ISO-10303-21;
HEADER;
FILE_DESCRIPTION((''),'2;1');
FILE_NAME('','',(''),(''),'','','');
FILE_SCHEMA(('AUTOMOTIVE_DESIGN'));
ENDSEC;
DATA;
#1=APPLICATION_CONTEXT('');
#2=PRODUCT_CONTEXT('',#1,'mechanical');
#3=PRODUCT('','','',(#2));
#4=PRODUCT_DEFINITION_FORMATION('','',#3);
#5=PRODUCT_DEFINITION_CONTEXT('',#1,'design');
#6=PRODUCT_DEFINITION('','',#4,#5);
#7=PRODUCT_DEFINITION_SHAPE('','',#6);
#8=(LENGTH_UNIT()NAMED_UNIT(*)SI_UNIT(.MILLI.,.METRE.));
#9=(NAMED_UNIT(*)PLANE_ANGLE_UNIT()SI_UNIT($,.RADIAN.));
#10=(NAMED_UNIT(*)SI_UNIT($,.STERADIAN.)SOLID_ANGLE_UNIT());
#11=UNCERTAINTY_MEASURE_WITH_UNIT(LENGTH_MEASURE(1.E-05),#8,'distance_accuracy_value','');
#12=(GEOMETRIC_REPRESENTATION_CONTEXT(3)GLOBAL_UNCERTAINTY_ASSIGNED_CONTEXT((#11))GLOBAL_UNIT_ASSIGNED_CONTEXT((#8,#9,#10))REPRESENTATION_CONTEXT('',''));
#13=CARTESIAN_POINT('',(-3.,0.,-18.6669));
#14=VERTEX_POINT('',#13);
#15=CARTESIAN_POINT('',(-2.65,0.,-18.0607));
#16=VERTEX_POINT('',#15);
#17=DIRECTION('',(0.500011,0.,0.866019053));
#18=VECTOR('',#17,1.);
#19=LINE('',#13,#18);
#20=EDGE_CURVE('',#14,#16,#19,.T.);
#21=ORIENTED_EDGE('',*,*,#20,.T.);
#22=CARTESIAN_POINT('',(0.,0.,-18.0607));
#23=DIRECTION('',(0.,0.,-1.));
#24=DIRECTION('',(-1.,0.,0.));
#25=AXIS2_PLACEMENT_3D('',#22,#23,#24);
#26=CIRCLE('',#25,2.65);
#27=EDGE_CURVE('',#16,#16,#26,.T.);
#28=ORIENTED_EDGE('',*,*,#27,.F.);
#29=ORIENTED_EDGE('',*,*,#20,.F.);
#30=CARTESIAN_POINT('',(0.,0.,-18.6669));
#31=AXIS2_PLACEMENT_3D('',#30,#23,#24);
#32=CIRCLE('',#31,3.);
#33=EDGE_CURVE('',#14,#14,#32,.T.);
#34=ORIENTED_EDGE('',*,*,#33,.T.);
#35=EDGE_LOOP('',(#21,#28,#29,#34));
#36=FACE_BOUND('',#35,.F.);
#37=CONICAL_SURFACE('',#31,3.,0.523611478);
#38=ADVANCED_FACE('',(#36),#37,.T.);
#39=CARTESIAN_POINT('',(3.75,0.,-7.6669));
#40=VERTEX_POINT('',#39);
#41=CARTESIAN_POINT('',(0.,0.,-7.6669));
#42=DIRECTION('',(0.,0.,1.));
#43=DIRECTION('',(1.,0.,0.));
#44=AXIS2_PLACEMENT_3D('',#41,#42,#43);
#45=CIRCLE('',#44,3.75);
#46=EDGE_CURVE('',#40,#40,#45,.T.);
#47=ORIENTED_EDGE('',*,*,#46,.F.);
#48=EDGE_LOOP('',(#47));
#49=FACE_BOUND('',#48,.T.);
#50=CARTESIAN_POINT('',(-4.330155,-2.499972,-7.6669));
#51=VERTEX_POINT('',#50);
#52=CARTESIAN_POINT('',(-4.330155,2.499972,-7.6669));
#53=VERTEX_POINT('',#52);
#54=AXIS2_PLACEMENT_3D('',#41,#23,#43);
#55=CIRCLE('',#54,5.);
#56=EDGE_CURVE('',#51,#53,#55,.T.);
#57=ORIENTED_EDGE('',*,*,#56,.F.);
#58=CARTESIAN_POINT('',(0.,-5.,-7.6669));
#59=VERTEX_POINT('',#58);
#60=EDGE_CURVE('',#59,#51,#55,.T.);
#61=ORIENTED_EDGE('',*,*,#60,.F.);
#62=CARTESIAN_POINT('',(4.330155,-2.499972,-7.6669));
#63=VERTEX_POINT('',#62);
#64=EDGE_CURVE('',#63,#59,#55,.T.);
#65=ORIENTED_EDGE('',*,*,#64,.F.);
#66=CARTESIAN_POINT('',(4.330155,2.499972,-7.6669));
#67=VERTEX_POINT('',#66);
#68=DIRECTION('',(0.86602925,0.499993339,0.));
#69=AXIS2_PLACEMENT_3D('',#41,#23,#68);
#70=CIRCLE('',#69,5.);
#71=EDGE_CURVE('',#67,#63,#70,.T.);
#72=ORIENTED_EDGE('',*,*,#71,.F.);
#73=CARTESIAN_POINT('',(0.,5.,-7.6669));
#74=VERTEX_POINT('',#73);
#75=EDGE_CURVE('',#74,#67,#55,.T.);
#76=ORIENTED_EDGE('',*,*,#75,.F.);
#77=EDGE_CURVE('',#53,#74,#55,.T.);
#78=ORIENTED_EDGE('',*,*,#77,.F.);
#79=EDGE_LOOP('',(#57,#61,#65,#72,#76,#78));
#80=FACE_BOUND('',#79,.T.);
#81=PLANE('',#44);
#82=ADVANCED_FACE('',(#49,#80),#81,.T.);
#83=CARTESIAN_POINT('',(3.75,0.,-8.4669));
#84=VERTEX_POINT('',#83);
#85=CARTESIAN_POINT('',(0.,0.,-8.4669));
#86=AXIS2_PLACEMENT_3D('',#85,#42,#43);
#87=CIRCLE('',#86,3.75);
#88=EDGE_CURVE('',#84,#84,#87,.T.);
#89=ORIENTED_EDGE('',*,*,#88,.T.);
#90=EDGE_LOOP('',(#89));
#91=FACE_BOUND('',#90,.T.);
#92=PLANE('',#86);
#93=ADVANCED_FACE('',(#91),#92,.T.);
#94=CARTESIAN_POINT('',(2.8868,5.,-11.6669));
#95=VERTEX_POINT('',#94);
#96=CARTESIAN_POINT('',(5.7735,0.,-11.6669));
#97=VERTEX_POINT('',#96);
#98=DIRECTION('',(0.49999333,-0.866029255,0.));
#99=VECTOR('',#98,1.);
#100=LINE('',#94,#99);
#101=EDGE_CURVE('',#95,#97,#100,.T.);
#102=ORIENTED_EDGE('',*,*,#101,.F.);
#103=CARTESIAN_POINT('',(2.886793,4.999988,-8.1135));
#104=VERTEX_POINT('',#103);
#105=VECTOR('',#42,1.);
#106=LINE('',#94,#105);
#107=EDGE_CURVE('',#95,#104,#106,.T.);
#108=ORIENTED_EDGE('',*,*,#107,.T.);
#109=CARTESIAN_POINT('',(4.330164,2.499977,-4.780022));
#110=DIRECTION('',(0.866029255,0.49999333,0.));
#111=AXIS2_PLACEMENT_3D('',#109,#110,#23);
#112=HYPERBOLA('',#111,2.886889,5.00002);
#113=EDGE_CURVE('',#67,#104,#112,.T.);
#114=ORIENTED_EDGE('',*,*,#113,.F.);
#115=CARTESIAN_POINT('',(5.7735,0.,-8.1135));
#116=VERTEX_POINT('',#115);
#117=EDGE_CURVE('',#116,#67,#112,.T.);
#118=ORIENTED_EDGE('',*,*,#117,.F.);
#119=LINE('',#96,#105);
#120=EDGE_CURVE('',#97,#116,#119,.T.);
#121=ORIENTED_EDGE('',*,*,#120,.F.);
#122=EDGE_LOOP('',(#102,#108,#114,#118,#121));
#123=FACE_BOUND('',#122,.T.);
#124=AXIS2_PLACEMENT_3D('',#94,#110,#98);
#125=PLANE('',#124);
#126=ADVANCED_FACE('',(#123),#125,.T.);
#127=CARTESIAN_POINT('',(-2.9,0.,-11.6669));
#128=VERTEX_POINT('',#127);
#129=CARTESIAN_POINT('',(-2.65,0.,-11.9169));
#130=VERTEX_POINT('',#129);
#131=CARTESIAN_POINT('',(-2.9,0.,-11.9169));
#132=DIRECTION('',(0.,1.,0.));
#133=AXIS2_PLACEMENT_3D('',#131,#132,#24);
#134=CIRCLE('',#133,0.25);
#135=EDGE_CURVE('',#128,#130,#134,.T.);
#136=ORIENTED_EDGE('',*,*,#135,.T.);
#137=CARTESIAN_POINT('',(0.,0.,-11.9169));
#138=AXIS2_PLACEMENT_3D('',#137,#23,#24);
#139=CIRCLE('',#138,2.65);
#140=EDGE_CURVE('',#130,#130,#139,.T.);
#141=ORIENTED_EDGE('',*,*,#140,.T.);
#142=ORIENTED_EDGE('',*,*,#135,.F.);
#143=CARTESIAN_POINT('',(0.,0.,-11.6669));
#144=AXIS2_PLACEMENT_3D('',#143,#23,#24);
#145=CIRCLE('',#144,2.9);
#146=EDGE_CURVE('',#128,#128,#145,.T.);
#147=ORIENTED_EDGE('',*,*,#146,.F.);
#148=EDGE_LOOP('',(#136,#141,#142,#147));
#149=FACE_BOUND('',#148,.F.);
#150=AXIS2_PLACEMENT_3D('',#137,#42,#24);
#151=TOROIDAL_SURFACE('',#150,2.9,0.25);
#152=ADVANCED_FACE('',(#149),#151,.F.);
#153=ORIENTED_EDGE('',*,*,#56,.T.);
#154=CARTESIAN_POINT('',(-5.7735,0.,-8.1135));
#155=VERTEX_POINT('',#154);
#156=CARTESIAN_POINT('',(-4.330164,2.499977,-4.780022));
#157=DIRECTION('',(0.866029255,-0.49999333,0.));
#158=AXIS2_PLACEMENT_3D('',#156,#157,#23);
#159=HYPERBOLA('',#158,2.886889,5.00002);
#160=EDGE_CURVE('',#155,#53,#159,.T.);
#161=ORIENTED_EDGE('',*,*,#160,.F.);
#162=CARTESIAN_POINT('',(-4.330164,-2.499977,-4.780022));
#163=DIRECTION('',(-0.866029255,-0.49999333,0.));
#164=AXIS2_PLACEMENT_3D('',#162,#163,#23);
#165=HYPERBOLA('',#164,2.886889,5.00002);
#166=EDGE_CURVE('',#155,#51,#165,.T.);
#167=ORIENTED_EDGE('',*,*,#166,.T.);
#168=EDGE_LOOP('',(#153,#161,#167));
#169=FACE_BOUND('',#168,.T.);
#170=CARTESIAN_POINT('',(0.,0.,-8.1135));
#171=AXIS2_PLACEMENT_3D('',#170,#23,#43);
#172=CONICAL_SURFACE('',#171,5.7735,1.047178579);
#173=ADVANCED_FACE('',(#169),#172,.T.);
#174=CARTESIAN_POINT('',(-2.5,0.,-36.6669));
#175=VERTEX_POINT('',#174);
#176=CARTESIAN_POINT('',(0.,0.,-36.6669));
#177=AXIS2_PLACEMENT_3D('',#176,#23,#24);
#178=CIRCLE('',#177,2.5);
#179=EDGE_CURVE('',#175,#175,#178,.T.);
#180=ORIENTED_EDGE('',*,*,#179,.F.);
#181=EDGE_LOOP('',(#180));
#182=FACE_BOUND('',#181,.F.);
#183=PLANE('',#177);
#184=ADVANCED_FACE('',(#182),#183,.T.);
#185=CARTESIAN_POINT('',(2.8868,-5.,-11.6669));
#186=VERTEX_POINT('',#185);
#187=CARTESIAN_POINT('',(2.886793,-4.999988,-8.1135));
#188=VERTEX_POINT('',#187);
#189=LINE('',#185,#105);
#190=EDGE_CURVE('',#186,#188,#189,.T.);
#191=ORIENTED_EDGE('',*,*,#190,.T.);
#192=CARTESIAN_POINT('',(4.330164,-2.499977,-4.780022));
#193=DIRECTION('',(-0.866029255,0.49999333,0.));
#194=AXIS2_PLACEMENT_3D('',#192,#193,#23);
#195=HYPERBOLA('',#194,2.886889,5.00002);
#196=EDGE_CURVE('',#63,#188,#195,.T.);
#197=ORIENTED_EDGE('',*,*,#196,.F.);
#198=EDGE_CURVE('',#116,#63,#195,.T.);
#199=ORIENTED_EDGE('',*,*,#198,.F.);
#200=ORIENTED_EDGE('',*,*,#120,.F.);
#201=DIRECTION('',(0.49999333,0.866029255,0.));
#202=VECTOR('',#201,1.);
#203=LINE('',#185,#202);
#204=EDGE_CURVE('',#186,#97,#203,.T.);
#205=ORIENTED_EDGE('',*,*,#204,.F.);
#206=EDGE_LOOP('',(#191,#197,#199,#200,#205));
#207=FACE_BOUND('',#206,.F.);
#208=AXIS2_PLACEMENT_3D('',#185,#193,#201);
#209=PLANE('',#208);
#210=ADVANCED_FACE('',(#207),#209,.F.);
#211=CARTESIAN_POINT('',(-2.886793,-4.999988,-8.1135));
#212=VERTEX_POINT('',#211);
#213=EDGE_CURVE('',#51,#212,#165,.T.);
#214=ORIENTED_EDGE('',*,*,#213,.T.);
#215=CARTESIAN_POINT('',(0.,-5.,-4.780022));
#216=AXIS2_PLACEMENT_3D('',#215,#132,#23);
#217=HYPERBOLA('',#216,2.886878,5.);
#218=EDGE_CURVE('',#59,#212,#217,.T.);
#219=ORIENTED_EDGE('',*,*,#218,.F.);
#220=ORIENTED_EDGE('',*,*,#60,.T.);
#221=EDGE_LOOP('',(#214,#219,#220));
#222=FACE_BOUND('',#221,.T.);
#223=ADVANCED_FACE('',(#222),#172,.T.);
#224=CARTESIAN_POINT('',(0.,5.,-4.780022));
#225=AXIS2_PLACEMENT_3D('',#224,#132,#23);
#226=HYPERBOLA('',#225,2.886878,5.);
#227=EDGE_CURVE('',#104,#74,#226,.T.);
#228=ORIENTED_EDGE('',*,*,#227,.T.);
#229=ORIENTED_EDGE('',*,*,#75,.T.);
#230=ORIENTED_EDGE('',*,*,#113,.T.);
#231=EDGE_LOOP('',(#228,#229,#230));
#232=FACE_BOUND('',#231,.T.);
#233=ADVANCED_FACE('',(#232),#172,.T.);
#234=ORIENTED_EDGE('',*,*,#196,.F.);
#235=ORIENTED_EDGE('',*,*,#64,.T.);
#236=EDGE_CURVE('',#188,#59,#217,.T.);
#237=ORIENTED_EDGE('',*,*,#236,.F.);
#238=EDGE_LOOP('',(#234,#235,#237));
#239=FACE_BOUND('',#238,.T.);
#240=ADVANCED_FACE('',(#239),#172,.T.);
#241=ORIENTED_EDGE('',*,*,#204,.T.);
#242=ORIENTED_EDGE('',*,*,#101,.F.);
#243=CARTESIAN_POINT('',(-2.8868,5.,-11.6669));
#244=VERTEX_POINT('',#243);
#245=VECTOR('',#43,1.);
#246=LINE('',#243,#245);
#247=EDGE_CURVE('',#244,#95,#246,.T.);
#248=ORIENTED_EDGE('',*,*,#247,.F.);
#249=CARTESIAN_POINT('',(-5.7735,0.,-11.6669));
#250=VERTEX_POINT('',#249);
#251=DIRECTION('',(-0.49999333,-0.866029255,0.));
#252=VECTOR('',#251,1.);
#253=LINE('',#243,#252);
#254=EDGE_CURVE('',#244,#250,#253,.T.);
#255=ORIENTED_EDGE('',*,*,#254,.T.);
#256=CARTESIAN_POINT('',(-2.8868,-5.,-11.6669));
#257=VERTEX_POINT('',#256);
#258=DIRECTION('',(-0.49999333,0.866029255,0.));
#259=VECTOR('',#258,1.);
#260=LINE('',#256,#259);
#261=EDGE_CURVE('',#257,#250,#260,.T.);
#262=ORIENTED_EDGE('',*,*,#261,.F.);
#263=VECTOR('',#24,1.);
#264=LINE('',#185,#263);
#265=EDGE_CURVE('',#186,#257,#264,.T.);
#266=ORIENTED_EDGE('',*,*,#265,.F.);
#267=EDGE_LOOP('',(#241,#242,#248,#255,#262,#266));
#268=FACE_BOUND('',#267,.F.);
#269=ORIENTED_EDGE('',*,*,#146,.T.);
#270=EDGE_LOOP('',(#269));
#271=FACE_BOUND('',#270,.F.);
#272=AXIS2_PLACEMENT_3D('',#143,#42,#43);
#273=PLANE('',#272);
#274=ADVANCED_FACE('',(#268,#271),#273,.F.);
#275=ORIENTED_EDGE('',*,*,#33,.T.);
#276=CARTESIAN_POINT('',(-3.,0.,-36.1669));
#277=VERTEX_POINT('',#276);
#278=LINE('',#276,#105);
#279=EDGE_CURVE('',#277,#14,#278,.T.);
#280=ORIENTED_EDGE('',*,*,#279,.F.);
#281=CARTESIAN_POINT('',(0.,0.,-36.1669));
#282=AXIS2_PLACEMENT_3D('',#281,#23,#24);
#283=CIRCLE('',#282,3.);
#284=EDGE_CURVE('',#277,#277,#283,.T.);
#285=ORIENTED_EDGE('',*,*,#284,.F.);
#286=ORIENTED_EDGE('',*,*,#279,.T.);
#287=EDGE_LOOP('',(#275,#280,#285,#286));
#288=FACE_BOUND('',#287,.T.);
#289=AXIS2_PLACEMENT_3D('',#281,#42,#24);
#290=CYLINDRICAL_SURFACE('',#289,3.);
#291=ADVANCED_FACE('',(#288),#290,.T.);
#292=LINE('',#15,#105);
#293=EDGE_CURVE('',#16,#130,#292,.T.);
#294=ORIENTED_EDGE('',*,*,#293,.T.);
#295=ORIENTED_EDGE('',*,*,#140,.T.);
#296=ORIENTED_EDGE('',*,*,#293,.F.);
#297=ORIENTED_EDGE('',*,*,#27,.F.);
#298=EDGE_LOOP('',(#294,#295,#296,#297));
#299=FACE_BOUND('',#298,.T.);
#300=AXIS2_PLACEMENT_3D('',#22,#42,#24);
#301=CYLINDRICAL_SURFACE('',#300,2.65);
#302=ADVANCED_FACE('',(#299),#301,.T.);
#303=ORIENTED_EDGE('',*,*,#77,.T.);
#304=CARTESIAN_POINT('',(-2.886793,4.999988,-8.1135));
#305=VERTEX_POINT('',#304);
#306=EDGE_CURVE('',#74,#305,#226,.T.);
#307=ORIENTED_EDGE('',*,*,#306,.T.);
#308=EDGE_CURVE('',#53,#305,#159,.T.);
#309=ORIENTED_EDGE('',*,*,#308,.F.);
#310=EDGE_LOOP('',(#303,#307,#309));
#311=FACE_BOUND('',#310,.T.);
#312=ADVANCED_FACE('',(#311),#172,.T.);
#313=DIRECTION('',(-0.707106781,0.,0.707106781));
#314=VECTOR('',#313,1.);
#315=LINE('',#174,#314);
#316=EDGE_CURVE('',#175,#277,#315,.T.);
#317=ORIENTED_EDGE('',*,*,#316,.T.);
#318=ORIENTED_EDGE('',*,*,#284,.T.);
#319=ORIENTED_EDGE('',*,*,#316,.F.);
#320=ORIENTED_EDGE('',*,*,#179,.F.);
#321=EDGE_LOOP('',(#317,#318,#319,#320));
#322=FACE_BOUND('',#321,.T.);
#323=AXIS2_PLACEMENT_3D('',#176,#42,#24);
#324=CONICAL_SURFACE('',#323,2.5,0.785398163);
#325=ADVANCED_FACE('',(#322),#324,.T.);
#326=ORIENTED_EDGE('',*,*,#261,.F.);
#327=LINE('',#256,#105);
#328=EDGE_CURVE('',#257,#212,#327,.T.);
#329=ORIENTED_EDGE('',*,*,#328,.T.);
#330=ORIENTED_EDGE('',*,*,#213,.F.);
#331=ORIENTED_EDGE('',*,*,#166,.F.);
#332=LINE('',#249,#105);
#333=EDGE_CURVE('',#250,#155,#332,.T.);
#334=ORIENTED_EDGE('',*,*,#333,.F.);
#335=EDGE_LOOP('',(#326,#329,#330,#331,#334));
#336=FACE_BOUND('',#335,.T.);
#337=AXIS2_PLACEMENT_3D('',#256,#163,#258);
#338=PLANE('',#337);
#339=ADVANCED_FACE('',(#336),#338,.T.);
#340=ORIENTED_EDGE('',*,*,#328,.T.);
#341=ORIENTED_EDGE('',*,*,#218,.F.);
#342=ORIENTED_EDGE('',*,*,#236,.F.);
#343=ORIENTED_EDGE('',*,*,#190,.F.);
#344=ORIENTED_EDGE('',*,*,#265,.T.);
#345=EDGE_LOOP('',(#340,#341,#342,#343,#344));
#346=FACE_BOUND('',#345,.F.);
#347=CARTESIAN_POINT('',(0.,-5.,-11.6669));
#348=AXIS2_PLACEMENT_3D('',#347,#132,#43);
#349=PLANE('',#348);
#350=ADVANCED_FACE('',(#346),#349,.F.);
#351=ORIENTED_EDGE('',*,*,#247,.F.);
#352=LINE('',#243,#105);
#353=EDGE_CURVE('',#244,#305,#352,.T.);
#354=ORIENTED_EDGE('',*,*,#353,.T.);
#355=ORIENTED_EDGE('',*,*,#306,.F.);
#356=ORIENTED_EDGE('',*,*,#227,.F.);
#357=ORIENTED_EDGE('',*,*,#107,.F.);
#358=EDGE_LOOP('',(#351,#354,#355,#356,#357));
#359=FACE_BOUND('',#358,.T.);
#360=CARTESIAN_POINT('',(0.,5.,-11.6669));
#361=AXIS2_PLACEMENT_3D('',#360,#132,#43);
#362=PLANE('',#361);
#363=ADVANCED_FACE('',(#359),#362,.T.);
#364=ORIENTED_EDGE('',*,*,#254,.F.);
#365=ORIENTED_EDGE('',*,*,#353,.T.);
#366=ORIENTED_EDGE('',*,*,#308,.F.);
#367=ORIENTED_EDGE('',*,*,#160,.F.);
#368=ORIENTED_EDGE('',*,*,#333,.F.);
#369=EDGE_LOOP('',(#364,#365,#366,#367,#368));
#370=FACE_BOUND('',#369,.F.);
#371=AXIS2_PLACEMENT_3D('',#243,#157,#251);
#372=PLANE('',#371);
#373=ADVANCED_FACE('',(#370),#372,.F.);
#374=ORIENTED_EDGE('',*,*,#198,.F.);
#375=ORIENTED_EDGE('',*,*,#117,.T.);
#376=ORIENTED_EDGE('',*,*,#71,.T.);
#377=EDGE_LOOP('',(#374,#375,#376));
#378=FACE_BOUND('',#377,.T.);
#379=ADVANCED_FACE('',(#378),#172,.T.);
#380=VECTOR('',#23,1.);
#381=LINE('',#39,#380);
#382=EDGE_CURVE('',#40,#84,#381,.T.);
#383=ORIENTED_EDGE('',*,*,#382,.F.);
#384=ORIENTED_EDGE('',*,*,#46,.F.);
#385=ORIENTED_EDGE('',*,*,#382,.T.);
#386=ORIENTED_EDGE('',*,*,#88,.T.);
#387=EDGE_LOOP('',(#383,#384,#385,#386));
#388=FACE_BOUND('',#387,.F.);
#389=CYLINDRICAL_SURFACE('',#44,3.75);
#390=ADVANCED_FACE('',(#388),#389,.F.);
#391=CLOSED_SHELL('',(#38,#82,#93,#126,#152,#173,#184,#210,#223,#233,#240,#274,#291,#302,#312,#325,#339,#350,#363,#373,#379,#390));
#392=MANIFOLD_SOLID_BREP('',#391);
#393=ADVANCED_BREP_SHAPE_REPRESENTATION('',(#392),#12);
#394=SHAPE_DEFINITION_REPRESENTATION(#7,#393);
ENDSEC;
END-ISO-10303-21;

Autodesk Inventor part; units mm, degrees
ref_plane "YZ Plane" through (0, 0, 0) normal (1, 0, 0) x (0, 1, 0)
sketch "Sketch2" plane through (0, 0, 0) normal (0, 1, 0) x (-1, 0, 0)
  line L0 (0, -11.6669) -> (0, -36.6669)
  line L1 (0, -36.6669) -> (2.5, -36.6669)
  line L2 (3, -36.1669) -> (3, -18.6669)
  line L3 (3, -18.6669) -> (2.65, -18.0607)
  line L4 (2.65, -18.0607) -> (2.65, -11.6669)
  line L5 (2.65, -11.6669) -> (0, -11.6669)
  line L6 (2.5, -36.6669) -> (3, -36.1669)
  line L7 (3, -36.6669) -> (3, -37.374)
  line L8 (0, -42.5155) -> (0, -6.5255) projected
  dimension "Ds" = 5.3
  dimension "NND" = 6
  dimension "b" = 18
  dimension "d3" = 30
  dimension "d5" = 45
  dimension "PTC" = 1
  dimension "NLG" = 25
revolve "Revolution1" add sketch "Sketch2" angle 360 about axis through (0, 0, -11.6669) along (0, 0, -1)
sketch "Sketch3" plane through (0, 0, -11.6669) normal (0, 0, 1) x (1, 0, 0)
  circle A0 centre (0, 0) radius 2.65 projected
  line L0 (0, 5) -> (2.8868, 5)
  line L1 (2.8868, 5) -> (5.7735, 0)
  line L2 (5.7735, 0) -> (0, 0)
  line L3 (0, 0) -> (0, 5)
  line L4 (0, 5) -> (-2.8868, 5)
  line L5 (-2.8868, 5) -> (-5.7735, 0)
  line L6 (0, -5) -> (2.8868, -5)
  line L7 (2.8868, -5) -> (5.7735, 0)
  line L8 (-2.8868, -5) -> (-5.7735, 0)
  line L9 (0, -5) -> (-2.8868, -5)
  dimension "d9" = 60
  dimension "ParS" = 10
  dimension "msp_d11" = 10
extrude "Extrusion1" add sketch "Sketch3" along normal blind 4
sketch "Sketch4" plane through (0, 0, 0) normal (0, 1, 0) x (-1, 0, 0)
  line L0 (-5, -7.6669) -> (-5.7735, -7.6669)
  line L1 (-5.7735, -7.6669) -> (-5.7735, -8.1135)
  line L2 (-5.7735, -8.1135) -> (-5, -7.6669)
  line L3 (0, -19.5254) -> (0, 35.4838) projected
  line L4 (0, 27.6253) -> (0, 27.1787)
  line L5 (-5.7735, -11.6669) -> (-5.7735, -7.6669) projected
  line L6 (-2.8868, -7.6669) -> (-5.7735, -7.6669) projected
  dimension "d14" = 30
  dimension "msp_d15" = 10
revolve "Revolution2" cut sketch "Sketch4" angle 360 about axis through (0, 0, 27.6253) along (0, 0, -1)
sketch "Sketch5" plane through (0, 0, -7.6669) normal (0, 0, 1) x (1, 0, 0)
  arc A0 (4.3301, 2.5) -> (0, 5) centre (0, 0) ccw projected
  circle A1 centre (0, 0) radius 3.75
  dimension "d27" = 7.5
extrude "Extrusion2" cut sketch "Sketch5" against normal blind 0.8
thread "Thread1" size "M6x1" class "6g" standard "ISO Metric profile" full length
ref_plane "MSC_PF1" through (0, 0, 0) normal (0, 1, 0) x (-1, 0, 0)
ref_plane "MSC_PT1" through (0, 0, -11.6669) normal (0, 0, -1) x (-1, 0, 0)
fillet "Fillet1" radius 0.25 1 edges at (2.65, 0, -11.6669)
equation "\"msp_d11\" = ParS"
equation "\"msp_d15\" = ParS"
equation "\"d27\" = 0.75 * ParS"
equation "\"d28\" = 0.2 * ParK"
equation "\"d30\" = r"
equation "\"msp_d17\" = b"
equation "\"r\" = 0.25"
equation "\"THREADDIA\" = NND"
equation "\"ParK\" = 4"
properties part number "ISO 4015 - M6 x 25" material "Stainless Steel, 440C"
